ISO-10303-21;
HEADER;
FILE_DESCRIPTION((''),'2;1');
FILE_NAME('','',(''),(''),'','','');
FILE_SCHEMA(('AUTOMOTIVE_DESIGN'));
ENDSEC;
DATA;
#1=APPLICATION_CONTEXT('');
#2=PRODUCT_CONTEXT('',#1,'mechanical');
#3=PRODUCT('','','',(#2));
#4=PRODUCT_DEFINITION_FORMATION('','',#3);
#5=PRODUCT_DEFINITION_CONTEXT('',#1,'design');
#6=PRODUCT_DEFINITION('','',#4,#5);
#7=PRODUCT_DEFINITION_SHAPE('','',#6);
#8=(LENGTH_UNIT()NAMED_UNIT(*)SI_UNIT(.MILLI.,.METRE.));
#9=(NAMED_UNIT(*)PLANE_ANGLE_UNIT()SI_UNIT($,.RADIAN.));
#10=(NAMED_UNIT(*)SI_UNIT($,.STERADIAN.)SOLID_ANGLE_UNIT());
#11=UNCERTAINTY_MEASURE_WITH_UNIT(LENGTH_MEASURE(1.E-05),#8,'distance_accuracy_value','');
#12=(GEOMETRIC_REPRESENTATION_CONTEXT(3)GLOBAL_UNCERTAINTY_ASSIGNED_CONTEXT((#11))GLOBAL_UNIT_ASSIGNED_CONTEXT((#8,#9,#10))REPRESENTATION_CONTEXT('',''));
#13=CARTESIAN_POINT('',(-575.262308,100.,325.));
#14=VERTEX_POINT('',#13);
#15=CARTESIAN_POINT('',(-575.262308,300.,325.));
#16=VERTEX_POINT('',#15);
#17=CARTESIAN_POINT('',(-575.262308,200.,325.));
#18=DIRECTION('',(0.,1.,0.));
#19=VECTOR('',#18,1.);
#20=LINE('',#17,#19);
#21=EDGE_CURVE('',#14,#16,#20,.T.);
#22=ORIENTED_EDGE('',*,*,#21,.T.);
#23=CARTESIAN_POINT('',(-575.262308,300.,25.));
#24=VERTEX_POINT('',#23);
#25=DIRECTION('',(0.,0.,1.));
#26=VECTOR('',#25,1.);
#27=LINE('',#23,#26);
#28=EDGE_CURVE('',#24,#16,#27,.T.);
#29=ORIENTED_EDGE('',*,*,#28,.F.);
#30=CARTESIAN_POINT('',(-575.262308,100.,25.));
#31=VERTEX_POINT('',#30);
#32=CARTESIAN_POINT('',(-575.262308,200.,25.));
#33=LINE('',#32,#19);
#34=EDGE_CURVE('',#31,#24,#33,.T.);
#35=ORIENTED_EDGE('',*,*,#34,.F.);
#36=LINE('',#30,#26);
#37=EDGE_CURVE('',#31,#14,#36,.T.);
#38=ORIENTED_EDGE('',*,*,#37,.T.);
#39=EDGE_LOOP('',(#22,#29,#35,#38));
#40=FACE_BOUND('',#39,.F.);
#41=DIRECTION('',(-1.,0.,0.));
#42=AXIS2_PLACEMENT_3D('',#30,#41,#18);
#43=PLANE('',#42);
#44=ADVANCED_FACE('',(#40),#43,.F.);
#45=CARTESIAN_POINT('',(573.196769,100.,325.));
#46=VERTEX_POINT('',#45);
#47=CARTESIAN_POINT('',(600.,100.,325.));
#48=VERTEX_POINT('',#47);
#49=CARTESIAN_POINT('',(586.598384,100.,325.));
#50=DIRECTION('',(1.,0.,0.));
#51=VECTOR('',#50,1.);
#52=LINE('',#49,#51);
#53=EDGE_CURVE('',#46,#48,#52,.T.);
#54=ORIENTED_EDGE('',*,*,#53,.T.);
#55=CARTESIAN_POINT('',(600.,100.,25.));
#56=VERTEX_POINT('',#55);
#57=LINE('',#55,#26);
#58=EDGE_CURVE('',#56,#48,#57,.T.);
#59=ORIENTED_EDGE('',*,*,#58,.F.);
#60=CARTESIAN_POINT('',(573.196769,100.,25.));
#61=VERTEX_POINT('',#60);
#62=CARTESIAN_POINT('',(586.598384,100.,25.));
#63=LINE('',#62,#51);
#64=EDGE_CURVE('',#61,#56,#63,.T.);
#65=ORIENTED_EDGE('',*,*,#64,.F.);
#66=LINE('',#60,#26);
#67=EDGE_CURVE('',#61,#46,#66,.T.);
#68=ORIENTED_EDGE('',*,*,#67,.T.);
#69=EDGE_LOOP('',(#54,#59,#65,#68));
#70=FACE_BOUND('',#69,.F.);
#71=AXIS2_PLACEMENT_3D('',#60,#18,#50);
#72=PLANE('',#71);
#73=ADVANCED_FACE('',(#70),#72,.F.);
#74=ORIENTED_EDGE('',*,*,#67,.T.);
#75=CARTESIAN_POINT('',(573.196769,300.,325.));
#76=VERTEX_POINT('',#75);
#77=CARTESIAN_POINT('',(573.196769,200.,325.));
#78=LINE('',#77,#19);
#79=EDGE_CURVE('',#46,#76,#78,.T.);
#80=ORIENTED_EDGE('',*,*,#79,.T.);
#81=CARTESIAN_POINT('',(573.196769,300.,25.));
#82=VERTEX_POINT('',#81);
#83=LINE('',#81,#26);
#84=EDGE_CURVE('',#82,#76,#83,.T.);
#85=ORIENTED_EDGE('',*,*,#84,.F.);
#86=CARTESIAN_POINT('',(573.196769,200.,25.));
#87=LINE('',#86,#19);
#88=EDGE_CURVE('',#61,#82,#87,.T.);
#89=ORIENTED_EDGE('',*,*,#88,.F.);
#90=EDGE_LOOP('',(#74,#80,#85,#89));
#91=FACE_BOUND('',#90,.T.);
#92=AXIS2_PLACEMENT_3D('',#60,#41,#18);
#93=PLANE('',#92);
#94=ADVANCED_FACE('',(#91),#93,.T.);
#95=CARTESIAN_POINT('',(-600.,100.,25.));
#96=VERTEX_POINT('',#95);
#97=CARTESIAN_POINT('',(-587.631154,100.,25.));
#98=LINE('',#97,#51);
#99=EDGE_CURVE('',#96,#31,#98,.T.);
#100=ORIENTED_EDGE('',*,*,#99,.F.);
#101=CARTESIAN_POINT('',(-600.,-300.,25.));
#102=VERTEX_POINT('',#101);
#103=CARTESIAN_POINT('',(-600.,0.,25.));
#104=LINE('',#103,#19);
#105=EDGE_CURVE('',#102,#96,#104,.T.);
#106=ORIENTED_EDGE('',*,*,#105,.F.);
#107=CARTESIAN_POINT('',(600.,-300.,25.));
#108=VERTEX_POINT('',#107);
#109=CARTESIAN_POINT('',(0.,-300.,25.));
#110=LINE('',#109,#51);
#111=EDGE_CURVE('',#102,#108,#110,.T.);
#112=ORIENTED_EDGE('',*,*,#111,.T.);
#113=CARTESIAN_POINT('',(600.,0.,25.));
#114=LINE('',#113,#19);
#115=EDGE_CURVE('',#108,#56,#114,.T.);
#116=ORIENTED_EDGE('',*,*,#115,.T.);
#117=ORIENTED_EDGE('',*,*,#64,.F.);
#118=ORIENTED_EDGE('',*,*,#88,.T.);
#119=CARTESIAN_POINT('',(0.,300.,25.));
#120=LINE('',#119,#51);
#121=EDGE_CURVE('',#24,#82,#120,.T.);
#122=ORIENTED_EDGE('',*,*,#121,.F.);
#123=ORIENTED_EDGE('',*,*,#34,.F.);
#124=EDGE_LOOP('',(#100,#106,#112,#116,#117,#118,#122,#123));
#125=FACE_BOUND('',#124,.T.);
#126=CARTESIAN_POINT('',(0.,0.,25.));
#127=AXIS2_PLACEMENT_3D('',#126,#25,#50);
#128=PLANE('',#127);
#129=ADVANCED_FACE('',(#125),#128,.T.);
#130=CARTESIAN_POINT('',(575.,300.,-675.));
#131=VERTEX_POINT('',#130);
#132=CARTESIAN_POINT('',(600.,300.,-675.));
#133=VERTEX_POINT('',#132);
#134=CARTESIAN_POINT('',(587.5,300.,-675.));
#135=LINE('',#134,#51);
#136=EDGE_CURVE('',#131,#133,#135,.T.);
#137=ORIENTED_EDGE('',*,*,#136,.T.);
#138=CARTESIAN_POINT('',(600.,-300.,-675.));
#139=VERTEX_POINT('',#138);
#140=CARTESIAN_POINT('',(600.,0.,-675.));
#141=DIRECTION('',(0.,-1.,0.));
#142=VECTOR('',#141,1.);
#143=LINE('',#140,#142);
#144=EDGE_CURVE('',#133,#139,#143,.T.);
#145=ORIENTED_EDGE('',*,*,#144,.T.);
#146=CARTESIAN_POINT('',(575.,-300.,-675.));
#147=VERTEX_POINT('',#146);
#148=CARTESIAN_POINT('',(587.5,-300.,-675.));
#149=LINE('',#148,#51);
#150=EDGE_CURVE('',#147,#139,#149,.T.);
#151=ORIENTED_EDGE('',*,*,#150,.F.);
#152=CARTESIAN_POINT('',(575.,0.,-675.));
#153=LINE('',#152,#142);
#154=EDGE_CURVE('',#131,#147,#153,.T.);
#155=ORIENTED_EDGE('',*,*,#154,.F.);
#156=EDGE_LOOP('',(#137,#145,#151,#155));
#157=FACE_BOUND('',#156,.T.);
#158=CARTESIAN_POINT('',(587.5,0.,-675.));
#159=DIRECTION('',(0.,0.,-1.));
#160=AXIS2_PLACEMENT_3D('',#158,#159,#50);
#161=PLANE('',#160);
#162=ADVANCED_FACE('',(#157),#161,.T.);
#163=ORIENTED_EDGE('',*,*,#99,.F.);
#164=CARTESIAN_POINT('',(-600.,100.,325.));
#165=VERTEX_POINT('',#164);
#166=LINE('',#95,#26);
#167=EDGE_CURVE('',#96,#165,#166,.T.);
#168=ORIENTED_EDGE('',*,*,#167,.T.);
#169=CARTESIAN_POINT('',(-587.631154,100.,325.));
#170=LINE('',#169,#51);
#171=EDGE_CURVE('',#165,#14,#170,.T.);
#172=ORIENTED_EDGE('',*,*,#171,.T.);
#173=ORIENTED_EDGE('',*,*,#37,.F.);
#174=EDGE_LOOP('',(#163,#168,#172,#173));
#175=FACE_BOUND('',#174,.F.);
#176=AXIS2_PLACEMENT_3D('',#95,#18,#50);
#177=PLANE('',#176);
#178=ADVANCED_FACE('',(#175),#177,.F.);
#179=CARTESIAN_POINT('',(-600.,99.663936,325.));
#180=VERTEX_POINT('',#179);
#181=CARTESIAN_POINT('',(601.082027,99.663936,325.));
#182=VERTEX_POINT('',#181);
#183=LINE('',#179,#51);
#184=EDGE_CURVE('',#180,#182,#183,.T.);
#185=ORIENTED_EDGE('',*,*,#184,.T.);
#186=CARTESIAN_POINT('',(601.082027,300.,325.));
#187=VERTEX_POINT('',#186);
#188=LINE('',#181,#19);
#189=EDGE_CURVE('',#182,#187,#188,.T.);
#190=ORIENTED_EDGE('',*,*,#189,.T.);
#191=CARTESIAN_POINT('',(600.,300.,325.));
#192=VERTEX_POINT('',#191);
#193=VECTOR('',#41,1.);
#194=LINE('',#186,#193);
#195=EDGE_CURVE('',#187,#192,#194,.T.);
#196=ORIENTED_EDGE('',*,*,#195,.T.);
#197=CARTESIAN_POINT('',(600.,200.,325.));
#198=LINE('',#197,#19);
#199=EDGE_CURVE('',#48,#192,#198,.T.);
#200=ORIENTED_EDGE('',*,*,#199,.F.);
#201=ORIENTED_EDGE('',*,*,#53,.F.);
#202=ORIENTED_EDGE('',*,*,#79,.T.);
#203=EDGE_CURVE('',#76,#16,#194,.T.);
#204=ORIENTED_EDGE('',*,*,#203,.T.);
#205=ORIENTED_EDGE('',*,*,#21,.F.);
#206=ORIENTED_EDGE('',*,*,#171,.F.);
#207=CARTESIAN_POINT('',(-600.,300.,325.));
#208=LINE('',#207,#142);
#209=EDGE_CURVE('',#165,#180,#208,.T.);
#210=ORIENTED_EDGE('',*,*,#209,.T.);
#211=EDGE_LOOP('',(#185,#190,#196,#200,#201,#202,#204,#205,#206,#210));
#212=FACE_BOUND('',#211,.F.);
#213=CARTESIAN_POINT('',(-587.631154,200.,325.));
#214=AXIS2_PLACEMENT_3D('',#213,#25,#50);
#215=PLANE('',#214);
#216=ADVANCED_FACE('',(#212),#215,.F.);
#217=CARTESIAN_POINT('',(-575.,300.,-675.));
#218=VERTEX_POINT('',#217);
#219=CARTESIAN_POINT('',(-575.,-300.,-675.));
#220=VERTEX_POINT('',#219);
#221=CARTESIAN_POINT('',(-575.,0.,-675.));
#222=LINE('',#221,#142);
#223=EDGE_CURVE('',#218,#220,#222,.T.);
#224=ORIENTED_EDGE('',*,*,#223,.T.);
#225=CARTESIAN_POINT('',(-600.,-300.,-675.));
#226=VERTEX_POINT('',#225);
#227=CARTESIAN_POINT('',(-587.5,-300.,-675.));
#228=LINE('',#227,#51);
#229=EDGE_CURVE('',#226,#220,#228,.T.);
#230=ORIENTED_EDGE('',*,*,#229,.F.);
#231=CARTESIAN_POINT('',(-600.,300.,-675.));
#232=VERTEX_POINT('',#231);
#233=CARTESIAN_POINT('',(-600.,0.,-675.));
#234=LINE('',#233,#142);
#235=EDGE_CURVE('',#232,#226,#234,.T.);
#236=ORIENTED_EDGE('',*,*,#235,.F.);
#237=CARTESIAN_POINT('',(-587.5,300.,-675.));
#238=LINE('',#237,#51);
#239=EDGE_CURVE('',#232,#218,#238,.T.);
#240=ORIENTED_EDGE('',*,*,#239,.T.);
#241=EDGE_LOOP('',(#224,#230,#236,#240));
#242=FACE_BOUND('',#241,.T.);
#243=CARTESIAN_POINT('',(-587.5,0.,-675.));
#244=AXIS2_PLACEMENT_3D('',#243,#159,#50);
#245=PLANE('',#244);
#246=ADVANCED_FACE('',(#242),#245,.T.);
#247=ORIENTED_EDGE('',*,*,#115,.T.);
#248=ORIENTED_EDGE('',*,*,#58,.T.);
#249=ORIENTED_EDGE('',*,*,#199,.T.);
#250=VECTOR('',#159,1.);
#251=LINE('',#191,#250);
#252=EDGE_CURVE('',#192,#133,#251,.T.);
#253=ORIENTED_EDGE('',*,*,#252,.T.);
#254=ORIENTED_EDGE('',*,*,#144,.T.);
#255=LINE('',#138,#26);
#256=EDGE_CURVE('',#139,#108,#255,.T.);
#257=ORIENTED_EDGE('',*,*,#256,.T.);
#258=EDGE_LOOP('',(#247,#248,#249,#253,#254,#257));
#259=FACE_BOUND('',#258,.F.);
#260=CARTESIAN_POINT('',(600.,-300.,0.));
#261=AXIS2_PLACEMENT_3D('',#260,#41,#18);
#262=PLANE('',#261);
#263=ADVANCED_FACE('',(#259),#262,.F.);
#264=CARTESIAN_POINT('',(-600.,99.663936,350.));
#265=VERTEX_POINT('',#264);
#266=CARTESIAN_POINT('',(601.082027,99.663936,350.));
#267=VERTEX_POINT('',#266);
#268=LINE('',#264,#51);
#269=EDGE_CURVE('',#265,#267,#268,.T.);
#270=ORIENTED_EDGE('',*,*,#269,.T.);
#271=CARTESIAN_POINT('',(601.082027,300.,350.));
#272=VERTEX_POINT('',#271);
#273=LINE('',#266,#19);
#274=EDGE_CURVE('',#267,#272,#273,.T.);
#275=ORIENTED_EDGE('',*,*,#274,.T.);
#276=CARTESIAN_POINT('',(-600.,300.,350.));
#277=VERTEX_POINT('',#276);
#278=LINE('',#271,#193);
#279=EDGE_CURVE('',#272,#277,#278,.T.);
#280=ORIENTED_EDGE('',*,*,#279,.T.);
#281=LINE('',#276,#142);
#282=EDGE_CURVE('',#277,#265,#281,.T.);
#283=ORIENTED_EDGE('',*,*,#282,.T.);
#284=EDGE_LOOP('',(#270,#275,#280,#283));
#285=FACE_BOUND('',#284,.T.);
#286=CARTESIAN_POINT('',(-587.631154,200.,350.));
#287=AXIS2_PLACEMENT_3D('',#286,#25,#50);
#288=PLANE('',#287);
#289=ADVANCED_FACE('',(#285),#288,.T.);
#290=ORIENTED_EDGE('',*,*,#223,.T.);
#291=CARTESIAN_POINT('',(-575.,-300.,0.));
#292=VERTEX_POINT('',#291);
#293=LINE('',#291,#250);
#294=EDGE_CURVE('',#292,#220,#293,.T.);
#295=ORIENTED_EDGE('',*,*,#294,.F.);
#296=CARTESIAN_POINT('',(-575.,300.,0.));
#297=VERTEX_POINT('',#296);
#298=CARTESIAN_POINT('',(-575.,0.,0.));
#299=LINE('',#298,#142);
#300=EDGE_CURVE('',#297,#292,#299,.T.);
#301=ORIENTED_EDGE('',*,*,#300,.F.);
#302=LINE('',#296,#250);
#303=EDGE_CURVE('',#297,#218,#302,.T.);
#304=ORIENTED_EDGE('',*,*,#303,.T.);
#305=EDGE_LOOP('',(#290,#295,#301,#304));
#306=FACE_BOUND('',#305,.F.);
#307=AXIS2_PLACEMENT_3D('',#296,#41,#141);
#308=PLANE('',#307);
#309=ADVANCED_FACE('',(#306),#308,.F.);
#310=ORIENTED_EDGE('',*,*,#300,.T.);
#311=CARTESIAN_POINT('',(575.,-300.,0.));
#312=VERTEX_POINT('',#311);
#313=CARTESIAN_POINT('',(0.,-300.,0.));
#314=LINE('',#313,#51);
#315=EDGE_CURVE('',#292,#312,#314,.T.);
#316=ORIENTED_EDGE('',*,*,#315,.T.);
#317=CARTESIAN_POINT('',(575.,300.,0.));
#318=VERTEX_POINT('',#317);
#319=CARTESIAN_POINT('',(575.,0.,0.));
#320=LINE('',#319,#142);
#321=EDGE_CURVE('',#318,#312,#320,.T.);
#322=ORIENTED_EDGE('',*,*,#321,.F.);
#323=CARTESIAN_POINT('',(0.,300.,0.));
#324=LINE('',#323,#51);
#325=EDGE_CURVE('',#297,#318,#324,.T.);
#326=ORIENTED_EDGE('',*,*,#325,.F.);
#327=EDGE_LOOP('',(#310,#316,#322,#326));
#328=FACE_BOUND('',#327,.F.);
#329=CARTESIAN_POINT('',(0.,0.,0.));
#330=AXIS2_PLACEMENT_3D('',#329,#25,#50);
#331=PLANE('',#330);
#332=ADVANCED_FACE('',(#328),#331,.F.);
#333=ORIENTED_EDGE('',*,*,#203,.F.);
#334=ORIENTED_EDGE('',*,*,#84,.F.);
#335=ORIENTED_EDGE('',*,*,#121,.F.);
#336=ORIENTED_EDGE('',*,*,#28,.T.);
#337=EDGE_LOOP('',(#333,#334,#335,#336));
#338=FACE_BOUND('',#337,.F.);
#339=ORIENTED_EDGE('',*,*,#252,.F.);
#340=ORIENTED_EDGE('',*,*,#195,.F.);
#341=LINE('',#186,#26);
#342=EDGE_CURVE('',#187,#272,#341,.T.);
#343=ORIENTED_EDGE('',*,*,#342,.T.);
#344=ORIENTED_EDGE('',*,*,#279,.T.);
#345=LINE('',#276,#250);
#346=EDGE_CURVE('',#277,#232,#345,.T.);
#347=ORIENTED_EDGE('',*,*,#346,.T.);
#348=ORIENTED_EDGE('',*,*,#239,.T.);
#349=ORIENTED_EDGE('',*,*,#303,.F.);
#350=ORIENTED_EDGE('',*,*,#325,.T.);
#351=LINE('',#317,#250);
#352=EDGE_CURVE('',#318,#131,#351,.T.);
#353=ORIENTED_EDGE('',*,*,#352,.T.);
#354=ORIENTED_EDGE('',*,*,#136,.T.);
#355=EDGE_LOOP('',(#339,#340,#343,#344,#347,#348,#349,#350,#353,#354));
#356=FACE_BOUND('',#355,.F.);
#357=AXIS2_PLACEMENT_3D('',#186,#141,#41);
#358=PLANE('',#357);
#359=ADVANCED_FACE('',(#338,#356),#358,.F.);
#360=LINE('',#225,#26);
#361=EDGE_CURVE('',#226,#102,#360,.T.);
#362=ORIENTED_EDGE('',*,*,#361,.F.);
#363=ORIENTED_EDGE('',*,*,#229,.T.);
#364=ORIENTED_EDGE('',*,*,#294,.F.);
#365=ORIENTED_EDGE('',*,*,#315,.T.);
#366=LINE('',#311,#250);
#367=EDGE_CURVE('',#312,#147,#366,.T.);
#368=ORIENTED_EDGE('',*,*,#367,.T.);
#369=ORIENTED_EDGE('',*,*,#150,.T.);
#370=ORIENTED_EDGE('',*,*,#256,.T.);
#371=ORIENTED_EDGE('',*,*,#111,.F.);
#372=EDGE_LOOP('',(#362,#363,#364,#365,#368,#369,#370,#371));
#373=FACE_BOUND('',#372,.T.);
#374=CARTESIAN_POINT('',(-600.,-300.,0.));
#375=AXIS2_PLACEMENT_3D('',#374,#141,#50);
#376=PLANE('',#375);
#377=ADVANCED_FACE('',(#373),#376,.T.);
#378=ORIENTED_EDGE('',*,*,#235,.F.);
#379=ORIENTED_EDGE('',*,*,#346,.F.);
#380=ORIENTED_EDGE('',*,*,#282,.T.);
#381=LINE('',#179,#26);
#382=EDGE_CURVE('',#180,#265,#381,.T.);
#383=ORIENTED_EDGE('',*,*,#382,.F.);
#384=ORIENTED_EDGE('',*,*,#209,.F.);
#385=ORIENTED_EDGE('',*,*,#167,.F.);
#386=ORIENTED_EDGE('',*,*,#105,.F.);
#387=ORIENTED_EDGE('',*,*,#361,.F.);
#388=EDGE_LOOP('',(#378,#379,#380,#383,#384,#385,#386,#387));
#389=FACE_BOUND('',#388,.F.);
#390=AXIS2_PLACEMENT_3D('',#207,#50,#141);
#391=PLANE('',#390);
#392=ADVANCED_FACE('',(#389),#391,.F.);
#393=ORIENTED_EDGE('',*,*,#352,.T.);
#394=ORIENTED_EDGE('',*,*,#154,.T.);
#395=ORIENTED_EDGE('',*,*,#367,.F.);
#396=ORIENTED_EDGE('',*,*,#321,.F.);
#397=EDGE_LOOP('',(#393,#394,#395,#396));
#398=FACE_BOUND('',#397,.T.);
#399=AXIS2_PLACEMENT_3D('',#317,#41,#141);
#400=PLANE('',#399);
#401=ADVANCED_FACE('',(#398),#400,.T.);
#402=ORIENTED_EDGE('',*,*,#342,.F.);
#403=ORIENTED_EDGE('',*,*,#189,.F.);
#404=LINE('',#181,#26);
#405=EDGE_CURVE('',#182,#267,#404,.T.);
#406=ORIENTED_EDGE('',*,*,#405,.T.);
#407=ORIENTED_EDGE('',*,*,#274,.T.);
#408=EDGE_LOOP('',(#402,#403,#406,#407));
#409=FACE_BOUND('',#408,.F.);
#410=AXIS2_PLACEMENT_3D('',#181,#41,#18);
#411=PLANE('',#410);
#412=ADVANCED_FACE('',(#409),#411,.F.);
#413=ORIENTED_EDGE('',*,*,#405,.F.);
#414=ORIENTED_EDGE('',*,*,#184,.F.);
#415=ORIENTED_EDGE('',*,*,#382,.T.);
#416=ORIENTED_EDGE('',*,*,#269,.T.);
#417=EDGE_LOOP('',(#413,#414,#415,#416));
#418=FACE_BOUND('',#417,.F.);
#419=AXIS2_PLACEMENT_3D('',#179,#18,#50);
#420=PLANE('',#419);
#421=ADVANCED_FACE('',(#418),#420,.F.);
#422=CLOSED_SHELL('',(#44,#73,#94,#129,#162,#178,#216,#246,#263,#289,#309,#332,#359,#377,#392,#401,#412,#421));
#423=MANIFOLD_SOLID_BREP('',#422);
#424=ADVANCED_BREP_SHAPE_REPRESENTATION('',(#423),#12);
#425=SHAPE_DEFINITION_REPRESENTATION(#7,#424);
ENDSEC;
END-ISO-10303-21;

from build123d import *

# Parameters (mm, degrees)
F0_W     = 1200
F0_H     = 600
F1_DEPTH = 25
F2_W     = 25
F2_H     = 600
F3_DEPTH = 675
F4_W     = 24.7376918793
F4_H     = 200
F4_W_2   = 26.8032312393
F5_DEPTH = 300
F6_W     = 24.7376918793
F6_H     = 200
F7_DEPTH = 25


with BuildPart() as f1:
    # F0 (on Top) → F1 (new body)
    with BuildSketch(Plane.XY):
        Rectangle(F0_W, F0_H)
    extrude(amount=F1_DEPTH)

    # F2 (on face) → F3 (join)
    with BuildSketch(Plane(origin=(0, 0, 0), x_dir=(1, 0, 0), z_dir=(0, 0, -1))):
        with Locations((-587.5, 0)):
            Rectangle(F2_W, F2_H)
        with Locations((587.5, 0)):
            Rectangle(F2_W, F2_H)
    extrude(amount=F3_DEPTH)

    # F4 (on face) → F5 (join)
    with BuildSketch(Plane.XY.offset(25)):
        with Locations((-587.6311540604, 200)):
            Rectangle(F4_W, F4_H)
        with Locations((586.5983843803, 200)):
            Rectangle(F4_W_2, F4_H)
    extrude(amount=F5_DEPTH)

    # F6 (on face) → F7 (join)
    with BuildSketch(Plane.XY.offset(325)):
        with Locations((-587.6311540604, 200)):
            Rectangle(F6_W, F6_H)
        Polygon((601.0820269585, 300), (-575.2623081207, 300), (-575.2623081207, 100), (-600, 100), (-600, 99.6639356017), (601.0820269585, 99.6639356017), align=None)
    extrude(amount=F7_DEPTH)


solid = f1.part
